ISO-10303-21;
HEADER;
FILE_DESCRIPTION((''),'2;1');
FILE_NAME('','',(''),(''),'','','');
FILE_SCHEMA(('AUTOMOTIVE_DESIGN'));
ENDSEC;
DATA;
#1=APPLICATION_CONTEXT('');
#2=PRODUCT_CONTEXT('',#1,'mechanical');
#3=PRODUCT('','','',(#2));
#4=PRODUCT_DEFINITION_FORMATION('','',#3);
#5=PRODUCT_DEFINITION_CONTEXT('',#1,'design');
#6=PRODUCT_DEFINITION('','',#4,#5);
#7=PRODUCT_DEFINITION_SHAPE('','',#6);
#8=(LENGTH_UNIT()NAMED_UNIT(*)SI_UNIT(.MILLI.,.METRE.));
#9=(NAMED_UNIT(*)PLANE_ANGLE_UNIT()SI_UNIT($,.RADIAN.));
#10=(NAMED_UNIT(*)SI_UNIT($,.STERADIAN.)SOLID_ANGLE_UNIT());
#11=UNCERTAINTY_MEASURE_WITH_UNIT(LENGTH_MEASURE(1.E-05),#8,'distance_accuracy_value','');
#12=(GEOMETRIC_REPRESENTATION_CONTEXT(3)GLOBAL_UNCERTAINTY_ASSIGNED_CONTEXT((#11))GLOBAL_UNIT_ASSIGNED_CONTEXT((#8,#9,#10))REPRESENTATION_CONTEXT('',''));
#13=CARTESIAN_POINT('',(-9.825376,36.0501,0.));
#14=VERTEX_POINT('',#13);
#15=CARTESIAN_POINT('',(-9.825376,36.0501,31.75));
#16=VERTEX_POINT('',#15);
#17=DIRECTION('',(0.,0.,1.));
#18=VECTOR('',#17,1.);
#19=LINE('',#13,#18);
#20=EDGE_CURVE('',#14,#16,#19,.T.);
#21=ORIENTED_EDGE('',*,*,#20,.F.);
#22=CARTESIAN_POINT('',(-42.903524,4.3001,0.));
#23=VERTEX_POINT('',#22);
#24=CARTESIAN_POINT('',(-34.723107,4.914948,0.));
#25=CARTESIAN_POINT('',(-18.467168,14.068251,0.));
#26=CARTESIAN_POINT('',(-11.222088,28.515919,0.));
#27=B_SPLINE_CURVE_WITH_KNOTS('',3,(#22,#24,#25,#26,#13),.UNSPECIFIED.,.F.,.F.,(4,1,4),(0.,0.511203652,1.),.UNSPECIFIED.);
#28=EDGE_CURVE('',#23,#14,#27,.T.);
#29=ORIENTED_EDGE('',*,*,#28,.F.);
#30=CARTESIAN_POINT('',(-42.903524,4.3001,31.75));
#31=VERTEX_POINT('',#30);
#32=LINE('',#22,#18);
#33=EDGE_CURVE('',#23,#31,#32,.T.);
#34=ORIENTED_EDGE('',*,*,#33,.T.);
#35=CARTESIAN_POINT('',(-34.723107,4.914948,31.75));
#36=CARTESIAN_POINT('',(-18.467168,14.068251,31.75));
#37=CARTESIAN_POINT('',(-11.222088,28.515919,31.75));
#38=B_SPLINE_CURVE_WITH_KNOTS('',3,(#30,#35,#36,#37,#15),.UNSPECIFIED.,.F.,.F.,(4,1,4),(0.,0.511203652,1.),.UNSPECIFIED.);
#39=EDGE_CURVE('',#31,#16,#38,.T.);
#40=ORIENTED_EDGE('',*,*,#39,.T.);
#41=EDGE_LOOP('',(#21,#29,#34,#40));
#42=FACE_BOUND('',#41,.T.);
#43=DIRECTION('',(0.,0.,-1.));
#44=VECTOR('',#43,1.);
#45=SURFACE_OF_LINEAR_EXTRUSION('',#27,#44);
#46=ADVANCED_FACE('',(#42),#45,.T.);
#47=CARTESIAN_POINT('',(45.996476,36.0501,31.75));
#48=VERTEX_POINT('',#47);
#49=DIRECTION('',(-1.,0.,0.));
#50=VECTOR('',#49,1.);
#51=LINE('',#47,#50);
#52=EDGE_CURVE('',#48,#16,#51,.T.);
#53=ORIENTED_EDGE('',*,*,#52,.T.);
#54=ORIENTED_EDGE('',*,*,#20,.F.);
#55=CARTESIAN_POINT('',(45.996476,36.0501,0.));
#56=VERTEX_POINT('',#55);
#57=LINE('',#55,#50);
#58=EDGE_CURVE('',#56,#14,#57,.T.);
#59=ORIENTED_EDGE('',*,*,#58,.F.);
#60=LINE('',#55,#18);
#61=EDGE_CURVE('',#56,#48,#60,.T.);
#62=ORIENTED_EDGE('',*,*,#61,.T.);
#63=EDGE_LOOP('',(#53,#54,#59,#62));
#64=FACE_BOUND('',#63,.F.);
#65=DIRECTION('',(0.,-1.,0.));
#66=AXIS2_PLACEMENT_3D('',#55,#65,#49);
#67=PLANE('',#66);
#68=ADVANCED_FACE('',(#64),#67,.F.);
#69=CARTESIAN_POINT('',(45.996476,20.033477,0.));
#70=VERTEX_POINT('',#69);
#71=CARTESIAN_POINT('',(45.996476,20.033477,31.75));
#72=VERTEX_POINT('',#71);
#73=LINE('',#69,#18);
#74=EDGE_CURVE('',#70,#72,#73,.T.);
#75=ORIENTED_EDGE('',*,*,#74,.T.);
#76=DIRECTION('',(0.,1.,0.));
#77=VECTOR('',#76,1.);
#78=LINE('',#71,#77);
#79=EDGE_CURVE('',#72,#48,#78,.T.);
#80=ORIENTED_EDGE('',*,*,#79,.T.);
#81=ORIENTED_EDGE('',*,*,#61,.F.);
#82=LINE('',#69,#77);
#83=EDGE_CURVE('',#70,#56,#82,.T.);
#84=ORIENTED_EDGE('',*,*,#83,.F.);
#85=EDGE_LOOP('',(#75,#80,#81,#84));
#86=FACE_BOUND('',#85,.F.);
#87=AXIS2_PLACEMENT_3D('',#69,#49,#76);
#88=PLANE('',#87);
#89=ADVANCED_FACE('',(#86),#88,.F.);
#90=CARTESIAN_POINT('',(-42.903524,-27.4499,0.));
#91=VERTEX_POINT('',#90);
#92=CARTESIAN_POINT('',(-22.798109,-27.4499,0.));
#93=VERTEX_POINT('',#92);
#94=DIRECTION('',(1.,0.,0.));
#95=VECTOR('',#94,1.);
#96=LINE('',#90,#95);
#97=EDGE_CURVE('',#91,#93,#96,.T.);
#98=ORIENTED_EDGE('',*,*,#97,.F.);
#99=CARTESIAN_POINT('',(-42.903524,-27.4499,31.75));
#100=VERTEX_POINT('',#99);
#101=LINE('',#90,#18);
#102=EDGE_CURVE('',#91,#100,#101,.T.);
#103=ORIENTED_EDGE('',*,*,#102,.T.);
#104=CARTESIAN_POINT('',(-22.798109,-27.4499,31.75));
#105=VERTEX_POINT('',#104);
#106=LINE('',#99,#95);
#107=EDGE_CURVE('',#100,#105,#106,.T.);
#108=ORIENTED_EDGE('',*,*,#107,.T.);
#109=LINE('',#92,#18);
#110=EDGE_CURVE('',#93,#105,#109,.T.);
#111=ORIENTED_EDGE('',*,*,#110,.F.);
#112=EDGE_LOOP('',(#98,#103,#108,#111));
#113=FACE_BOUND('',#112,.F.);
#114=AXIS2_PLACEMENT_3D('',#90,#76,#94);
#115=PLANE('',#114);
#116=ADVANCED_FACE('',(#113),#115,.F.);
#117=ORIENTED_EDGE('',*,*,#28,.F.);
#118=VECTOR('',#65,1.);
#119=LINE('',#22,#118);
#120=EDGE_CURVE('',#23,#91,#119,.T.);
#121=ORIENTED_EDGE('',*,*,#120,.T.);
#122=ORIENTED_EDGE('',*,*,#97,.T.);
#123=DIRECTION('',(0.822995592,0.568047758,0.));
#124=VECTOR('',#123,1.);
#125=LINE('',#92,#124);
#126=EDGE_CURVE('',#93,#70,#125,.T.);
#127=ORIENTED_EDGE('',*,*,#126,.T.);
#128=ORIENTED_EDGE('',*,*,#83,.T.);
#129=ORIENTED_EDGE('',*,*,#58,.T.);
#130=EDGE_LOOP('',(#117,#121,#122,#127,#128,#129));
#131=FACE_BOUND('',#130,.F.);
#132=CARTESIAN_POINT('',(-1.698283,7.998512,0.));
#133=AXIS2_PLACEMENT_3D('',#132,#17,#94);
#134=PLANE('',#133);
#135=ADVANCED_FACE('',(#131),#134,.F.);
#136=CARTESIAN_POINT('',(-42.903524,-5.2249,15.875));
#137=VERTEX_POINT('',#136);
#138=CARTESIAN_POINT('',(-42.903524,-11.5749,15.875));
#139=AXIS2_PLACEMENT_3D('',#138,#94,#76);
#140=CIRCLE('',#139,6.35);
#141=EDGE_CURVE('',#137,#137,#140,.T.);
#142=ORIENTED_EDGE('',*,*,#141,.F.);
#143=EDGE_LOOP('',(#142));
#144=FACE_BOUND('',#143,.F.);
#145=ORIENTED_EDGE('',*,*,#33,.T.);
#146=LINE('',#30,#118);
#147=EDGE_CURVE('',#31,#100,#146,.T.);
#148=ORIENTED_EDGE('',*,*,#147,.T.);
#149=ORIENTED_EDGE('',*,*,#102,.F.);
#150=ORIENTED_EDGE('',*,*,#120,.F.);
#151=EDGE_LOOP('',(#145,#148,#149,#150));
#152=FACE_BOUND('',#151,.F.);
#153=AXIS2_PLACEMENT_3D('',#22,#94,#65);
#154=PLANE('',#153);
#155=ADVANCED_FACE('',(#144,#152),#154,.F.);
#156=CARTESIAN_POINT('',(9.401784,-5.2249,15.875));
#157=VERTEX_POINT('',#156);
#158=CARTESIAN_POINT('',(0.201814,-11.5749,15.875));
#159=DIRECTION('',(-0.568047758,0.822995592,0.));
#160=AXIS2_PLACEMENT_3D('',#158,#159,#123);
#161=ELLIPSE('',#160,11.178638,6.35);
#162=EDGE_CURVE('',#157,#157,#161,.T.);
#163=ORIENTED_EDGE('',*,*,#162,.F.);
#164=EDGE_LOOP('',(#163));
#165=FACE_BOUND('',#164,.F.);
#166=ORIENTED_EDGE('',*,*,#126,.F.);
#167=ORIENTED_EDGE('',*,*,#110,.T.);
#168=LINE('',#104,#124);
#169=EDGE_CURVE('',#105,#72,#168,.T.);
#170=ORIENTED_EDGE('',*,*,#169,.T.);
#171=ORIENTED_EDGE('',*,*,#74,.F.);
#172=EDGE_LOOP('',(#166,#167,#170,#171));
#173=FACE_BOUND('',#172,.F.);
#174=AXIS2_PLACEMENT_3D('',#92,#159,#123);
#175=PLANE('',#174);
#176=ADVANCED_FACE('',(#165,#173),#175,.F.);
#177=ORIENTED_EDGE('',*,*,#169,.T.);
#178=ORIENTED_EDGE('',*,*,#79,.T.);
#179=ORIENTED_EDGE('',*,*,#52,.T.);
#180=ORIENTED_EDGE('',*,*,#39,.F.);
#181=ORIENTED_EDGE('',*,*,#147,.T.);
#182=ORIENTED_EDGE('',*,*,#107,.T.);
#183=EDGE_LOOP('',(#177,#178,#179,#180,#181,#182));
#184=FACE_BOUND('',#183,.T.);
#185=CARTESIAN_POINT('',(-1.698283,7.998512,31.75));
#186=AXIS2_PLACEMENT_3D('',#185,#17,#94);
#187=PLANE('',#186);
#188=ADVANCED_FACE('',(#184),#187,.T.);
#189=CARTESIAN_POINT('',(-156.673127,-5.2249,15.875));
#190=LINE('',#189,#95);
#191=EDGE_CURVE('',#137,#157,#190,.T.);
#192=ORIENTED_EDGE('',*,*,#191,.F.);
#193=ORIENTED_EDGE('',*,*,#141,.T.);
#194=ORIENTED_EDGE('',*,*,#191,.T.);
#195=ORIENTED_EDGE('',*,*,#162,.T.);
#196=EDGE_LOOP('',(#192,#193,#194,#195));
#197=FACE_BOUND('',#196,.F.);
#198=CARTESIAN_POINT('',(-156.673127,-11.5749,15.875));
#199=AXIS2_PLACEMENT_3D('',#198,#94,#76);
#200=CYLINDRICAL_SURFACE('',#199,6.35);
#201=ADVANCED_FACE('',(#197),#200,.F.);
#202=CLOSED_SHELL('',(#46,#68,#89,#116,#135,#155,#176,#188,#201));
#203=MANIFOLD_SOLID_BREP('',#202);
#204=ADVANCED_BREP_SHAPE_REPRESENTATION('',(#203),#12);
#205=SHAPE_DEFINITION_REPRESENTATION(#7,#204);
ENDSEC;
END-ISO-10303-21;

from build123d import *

# Parameters (mm, degrees)
F1_DEPTH = 31.75
F3_D     = 12.7


with BuildPart() as f1:
    # F0 (on Top) → F1 (new body)
    with BuildSketch(Plane.XY):
        with BuildLine():
            Line((45.9964759648, 36.0500998795), (-9.8253758624, 36.0500998795))
            add(Edge.make_bspline(
                [(-42.9035240352, 4.3000998795), (-34.7231067307, 4.914947889), (-18.4671684559, 14.0682512449), (-11.2220877593, 28.5159185869), (-9.8253758624, 36.0500998795)],
                knots=[0, 0, 0, 0, 0.5112036525, 1, 1, 1, 1], degree=3))
            Line((-42.9035240352, 4.3000998795), (-42.9035240352, -27.4499001205))
            Line((-42.9035240352, -27.4499001205), (-22.798109327, -27.4499001205))
            Line((-22.798109327, -27.4499001205), (45.9964759648, 20.0334768742))
            Line((45.9964759648, 20.0334768742), (45.9964759648, 36.0500998795))
        make_face()
    extrude(amount=F1_DEPTH)

    # F3 (through all)
    with Locations(Plane(origin=(-42.9035240352, 0, 0), x_dir=(0, -1, 0), z_dir=(-1, 0, 0))):
        with Locations((11.5749001205, 15.875)):
            Hole(F3_D / 2)


solid = f1.part
